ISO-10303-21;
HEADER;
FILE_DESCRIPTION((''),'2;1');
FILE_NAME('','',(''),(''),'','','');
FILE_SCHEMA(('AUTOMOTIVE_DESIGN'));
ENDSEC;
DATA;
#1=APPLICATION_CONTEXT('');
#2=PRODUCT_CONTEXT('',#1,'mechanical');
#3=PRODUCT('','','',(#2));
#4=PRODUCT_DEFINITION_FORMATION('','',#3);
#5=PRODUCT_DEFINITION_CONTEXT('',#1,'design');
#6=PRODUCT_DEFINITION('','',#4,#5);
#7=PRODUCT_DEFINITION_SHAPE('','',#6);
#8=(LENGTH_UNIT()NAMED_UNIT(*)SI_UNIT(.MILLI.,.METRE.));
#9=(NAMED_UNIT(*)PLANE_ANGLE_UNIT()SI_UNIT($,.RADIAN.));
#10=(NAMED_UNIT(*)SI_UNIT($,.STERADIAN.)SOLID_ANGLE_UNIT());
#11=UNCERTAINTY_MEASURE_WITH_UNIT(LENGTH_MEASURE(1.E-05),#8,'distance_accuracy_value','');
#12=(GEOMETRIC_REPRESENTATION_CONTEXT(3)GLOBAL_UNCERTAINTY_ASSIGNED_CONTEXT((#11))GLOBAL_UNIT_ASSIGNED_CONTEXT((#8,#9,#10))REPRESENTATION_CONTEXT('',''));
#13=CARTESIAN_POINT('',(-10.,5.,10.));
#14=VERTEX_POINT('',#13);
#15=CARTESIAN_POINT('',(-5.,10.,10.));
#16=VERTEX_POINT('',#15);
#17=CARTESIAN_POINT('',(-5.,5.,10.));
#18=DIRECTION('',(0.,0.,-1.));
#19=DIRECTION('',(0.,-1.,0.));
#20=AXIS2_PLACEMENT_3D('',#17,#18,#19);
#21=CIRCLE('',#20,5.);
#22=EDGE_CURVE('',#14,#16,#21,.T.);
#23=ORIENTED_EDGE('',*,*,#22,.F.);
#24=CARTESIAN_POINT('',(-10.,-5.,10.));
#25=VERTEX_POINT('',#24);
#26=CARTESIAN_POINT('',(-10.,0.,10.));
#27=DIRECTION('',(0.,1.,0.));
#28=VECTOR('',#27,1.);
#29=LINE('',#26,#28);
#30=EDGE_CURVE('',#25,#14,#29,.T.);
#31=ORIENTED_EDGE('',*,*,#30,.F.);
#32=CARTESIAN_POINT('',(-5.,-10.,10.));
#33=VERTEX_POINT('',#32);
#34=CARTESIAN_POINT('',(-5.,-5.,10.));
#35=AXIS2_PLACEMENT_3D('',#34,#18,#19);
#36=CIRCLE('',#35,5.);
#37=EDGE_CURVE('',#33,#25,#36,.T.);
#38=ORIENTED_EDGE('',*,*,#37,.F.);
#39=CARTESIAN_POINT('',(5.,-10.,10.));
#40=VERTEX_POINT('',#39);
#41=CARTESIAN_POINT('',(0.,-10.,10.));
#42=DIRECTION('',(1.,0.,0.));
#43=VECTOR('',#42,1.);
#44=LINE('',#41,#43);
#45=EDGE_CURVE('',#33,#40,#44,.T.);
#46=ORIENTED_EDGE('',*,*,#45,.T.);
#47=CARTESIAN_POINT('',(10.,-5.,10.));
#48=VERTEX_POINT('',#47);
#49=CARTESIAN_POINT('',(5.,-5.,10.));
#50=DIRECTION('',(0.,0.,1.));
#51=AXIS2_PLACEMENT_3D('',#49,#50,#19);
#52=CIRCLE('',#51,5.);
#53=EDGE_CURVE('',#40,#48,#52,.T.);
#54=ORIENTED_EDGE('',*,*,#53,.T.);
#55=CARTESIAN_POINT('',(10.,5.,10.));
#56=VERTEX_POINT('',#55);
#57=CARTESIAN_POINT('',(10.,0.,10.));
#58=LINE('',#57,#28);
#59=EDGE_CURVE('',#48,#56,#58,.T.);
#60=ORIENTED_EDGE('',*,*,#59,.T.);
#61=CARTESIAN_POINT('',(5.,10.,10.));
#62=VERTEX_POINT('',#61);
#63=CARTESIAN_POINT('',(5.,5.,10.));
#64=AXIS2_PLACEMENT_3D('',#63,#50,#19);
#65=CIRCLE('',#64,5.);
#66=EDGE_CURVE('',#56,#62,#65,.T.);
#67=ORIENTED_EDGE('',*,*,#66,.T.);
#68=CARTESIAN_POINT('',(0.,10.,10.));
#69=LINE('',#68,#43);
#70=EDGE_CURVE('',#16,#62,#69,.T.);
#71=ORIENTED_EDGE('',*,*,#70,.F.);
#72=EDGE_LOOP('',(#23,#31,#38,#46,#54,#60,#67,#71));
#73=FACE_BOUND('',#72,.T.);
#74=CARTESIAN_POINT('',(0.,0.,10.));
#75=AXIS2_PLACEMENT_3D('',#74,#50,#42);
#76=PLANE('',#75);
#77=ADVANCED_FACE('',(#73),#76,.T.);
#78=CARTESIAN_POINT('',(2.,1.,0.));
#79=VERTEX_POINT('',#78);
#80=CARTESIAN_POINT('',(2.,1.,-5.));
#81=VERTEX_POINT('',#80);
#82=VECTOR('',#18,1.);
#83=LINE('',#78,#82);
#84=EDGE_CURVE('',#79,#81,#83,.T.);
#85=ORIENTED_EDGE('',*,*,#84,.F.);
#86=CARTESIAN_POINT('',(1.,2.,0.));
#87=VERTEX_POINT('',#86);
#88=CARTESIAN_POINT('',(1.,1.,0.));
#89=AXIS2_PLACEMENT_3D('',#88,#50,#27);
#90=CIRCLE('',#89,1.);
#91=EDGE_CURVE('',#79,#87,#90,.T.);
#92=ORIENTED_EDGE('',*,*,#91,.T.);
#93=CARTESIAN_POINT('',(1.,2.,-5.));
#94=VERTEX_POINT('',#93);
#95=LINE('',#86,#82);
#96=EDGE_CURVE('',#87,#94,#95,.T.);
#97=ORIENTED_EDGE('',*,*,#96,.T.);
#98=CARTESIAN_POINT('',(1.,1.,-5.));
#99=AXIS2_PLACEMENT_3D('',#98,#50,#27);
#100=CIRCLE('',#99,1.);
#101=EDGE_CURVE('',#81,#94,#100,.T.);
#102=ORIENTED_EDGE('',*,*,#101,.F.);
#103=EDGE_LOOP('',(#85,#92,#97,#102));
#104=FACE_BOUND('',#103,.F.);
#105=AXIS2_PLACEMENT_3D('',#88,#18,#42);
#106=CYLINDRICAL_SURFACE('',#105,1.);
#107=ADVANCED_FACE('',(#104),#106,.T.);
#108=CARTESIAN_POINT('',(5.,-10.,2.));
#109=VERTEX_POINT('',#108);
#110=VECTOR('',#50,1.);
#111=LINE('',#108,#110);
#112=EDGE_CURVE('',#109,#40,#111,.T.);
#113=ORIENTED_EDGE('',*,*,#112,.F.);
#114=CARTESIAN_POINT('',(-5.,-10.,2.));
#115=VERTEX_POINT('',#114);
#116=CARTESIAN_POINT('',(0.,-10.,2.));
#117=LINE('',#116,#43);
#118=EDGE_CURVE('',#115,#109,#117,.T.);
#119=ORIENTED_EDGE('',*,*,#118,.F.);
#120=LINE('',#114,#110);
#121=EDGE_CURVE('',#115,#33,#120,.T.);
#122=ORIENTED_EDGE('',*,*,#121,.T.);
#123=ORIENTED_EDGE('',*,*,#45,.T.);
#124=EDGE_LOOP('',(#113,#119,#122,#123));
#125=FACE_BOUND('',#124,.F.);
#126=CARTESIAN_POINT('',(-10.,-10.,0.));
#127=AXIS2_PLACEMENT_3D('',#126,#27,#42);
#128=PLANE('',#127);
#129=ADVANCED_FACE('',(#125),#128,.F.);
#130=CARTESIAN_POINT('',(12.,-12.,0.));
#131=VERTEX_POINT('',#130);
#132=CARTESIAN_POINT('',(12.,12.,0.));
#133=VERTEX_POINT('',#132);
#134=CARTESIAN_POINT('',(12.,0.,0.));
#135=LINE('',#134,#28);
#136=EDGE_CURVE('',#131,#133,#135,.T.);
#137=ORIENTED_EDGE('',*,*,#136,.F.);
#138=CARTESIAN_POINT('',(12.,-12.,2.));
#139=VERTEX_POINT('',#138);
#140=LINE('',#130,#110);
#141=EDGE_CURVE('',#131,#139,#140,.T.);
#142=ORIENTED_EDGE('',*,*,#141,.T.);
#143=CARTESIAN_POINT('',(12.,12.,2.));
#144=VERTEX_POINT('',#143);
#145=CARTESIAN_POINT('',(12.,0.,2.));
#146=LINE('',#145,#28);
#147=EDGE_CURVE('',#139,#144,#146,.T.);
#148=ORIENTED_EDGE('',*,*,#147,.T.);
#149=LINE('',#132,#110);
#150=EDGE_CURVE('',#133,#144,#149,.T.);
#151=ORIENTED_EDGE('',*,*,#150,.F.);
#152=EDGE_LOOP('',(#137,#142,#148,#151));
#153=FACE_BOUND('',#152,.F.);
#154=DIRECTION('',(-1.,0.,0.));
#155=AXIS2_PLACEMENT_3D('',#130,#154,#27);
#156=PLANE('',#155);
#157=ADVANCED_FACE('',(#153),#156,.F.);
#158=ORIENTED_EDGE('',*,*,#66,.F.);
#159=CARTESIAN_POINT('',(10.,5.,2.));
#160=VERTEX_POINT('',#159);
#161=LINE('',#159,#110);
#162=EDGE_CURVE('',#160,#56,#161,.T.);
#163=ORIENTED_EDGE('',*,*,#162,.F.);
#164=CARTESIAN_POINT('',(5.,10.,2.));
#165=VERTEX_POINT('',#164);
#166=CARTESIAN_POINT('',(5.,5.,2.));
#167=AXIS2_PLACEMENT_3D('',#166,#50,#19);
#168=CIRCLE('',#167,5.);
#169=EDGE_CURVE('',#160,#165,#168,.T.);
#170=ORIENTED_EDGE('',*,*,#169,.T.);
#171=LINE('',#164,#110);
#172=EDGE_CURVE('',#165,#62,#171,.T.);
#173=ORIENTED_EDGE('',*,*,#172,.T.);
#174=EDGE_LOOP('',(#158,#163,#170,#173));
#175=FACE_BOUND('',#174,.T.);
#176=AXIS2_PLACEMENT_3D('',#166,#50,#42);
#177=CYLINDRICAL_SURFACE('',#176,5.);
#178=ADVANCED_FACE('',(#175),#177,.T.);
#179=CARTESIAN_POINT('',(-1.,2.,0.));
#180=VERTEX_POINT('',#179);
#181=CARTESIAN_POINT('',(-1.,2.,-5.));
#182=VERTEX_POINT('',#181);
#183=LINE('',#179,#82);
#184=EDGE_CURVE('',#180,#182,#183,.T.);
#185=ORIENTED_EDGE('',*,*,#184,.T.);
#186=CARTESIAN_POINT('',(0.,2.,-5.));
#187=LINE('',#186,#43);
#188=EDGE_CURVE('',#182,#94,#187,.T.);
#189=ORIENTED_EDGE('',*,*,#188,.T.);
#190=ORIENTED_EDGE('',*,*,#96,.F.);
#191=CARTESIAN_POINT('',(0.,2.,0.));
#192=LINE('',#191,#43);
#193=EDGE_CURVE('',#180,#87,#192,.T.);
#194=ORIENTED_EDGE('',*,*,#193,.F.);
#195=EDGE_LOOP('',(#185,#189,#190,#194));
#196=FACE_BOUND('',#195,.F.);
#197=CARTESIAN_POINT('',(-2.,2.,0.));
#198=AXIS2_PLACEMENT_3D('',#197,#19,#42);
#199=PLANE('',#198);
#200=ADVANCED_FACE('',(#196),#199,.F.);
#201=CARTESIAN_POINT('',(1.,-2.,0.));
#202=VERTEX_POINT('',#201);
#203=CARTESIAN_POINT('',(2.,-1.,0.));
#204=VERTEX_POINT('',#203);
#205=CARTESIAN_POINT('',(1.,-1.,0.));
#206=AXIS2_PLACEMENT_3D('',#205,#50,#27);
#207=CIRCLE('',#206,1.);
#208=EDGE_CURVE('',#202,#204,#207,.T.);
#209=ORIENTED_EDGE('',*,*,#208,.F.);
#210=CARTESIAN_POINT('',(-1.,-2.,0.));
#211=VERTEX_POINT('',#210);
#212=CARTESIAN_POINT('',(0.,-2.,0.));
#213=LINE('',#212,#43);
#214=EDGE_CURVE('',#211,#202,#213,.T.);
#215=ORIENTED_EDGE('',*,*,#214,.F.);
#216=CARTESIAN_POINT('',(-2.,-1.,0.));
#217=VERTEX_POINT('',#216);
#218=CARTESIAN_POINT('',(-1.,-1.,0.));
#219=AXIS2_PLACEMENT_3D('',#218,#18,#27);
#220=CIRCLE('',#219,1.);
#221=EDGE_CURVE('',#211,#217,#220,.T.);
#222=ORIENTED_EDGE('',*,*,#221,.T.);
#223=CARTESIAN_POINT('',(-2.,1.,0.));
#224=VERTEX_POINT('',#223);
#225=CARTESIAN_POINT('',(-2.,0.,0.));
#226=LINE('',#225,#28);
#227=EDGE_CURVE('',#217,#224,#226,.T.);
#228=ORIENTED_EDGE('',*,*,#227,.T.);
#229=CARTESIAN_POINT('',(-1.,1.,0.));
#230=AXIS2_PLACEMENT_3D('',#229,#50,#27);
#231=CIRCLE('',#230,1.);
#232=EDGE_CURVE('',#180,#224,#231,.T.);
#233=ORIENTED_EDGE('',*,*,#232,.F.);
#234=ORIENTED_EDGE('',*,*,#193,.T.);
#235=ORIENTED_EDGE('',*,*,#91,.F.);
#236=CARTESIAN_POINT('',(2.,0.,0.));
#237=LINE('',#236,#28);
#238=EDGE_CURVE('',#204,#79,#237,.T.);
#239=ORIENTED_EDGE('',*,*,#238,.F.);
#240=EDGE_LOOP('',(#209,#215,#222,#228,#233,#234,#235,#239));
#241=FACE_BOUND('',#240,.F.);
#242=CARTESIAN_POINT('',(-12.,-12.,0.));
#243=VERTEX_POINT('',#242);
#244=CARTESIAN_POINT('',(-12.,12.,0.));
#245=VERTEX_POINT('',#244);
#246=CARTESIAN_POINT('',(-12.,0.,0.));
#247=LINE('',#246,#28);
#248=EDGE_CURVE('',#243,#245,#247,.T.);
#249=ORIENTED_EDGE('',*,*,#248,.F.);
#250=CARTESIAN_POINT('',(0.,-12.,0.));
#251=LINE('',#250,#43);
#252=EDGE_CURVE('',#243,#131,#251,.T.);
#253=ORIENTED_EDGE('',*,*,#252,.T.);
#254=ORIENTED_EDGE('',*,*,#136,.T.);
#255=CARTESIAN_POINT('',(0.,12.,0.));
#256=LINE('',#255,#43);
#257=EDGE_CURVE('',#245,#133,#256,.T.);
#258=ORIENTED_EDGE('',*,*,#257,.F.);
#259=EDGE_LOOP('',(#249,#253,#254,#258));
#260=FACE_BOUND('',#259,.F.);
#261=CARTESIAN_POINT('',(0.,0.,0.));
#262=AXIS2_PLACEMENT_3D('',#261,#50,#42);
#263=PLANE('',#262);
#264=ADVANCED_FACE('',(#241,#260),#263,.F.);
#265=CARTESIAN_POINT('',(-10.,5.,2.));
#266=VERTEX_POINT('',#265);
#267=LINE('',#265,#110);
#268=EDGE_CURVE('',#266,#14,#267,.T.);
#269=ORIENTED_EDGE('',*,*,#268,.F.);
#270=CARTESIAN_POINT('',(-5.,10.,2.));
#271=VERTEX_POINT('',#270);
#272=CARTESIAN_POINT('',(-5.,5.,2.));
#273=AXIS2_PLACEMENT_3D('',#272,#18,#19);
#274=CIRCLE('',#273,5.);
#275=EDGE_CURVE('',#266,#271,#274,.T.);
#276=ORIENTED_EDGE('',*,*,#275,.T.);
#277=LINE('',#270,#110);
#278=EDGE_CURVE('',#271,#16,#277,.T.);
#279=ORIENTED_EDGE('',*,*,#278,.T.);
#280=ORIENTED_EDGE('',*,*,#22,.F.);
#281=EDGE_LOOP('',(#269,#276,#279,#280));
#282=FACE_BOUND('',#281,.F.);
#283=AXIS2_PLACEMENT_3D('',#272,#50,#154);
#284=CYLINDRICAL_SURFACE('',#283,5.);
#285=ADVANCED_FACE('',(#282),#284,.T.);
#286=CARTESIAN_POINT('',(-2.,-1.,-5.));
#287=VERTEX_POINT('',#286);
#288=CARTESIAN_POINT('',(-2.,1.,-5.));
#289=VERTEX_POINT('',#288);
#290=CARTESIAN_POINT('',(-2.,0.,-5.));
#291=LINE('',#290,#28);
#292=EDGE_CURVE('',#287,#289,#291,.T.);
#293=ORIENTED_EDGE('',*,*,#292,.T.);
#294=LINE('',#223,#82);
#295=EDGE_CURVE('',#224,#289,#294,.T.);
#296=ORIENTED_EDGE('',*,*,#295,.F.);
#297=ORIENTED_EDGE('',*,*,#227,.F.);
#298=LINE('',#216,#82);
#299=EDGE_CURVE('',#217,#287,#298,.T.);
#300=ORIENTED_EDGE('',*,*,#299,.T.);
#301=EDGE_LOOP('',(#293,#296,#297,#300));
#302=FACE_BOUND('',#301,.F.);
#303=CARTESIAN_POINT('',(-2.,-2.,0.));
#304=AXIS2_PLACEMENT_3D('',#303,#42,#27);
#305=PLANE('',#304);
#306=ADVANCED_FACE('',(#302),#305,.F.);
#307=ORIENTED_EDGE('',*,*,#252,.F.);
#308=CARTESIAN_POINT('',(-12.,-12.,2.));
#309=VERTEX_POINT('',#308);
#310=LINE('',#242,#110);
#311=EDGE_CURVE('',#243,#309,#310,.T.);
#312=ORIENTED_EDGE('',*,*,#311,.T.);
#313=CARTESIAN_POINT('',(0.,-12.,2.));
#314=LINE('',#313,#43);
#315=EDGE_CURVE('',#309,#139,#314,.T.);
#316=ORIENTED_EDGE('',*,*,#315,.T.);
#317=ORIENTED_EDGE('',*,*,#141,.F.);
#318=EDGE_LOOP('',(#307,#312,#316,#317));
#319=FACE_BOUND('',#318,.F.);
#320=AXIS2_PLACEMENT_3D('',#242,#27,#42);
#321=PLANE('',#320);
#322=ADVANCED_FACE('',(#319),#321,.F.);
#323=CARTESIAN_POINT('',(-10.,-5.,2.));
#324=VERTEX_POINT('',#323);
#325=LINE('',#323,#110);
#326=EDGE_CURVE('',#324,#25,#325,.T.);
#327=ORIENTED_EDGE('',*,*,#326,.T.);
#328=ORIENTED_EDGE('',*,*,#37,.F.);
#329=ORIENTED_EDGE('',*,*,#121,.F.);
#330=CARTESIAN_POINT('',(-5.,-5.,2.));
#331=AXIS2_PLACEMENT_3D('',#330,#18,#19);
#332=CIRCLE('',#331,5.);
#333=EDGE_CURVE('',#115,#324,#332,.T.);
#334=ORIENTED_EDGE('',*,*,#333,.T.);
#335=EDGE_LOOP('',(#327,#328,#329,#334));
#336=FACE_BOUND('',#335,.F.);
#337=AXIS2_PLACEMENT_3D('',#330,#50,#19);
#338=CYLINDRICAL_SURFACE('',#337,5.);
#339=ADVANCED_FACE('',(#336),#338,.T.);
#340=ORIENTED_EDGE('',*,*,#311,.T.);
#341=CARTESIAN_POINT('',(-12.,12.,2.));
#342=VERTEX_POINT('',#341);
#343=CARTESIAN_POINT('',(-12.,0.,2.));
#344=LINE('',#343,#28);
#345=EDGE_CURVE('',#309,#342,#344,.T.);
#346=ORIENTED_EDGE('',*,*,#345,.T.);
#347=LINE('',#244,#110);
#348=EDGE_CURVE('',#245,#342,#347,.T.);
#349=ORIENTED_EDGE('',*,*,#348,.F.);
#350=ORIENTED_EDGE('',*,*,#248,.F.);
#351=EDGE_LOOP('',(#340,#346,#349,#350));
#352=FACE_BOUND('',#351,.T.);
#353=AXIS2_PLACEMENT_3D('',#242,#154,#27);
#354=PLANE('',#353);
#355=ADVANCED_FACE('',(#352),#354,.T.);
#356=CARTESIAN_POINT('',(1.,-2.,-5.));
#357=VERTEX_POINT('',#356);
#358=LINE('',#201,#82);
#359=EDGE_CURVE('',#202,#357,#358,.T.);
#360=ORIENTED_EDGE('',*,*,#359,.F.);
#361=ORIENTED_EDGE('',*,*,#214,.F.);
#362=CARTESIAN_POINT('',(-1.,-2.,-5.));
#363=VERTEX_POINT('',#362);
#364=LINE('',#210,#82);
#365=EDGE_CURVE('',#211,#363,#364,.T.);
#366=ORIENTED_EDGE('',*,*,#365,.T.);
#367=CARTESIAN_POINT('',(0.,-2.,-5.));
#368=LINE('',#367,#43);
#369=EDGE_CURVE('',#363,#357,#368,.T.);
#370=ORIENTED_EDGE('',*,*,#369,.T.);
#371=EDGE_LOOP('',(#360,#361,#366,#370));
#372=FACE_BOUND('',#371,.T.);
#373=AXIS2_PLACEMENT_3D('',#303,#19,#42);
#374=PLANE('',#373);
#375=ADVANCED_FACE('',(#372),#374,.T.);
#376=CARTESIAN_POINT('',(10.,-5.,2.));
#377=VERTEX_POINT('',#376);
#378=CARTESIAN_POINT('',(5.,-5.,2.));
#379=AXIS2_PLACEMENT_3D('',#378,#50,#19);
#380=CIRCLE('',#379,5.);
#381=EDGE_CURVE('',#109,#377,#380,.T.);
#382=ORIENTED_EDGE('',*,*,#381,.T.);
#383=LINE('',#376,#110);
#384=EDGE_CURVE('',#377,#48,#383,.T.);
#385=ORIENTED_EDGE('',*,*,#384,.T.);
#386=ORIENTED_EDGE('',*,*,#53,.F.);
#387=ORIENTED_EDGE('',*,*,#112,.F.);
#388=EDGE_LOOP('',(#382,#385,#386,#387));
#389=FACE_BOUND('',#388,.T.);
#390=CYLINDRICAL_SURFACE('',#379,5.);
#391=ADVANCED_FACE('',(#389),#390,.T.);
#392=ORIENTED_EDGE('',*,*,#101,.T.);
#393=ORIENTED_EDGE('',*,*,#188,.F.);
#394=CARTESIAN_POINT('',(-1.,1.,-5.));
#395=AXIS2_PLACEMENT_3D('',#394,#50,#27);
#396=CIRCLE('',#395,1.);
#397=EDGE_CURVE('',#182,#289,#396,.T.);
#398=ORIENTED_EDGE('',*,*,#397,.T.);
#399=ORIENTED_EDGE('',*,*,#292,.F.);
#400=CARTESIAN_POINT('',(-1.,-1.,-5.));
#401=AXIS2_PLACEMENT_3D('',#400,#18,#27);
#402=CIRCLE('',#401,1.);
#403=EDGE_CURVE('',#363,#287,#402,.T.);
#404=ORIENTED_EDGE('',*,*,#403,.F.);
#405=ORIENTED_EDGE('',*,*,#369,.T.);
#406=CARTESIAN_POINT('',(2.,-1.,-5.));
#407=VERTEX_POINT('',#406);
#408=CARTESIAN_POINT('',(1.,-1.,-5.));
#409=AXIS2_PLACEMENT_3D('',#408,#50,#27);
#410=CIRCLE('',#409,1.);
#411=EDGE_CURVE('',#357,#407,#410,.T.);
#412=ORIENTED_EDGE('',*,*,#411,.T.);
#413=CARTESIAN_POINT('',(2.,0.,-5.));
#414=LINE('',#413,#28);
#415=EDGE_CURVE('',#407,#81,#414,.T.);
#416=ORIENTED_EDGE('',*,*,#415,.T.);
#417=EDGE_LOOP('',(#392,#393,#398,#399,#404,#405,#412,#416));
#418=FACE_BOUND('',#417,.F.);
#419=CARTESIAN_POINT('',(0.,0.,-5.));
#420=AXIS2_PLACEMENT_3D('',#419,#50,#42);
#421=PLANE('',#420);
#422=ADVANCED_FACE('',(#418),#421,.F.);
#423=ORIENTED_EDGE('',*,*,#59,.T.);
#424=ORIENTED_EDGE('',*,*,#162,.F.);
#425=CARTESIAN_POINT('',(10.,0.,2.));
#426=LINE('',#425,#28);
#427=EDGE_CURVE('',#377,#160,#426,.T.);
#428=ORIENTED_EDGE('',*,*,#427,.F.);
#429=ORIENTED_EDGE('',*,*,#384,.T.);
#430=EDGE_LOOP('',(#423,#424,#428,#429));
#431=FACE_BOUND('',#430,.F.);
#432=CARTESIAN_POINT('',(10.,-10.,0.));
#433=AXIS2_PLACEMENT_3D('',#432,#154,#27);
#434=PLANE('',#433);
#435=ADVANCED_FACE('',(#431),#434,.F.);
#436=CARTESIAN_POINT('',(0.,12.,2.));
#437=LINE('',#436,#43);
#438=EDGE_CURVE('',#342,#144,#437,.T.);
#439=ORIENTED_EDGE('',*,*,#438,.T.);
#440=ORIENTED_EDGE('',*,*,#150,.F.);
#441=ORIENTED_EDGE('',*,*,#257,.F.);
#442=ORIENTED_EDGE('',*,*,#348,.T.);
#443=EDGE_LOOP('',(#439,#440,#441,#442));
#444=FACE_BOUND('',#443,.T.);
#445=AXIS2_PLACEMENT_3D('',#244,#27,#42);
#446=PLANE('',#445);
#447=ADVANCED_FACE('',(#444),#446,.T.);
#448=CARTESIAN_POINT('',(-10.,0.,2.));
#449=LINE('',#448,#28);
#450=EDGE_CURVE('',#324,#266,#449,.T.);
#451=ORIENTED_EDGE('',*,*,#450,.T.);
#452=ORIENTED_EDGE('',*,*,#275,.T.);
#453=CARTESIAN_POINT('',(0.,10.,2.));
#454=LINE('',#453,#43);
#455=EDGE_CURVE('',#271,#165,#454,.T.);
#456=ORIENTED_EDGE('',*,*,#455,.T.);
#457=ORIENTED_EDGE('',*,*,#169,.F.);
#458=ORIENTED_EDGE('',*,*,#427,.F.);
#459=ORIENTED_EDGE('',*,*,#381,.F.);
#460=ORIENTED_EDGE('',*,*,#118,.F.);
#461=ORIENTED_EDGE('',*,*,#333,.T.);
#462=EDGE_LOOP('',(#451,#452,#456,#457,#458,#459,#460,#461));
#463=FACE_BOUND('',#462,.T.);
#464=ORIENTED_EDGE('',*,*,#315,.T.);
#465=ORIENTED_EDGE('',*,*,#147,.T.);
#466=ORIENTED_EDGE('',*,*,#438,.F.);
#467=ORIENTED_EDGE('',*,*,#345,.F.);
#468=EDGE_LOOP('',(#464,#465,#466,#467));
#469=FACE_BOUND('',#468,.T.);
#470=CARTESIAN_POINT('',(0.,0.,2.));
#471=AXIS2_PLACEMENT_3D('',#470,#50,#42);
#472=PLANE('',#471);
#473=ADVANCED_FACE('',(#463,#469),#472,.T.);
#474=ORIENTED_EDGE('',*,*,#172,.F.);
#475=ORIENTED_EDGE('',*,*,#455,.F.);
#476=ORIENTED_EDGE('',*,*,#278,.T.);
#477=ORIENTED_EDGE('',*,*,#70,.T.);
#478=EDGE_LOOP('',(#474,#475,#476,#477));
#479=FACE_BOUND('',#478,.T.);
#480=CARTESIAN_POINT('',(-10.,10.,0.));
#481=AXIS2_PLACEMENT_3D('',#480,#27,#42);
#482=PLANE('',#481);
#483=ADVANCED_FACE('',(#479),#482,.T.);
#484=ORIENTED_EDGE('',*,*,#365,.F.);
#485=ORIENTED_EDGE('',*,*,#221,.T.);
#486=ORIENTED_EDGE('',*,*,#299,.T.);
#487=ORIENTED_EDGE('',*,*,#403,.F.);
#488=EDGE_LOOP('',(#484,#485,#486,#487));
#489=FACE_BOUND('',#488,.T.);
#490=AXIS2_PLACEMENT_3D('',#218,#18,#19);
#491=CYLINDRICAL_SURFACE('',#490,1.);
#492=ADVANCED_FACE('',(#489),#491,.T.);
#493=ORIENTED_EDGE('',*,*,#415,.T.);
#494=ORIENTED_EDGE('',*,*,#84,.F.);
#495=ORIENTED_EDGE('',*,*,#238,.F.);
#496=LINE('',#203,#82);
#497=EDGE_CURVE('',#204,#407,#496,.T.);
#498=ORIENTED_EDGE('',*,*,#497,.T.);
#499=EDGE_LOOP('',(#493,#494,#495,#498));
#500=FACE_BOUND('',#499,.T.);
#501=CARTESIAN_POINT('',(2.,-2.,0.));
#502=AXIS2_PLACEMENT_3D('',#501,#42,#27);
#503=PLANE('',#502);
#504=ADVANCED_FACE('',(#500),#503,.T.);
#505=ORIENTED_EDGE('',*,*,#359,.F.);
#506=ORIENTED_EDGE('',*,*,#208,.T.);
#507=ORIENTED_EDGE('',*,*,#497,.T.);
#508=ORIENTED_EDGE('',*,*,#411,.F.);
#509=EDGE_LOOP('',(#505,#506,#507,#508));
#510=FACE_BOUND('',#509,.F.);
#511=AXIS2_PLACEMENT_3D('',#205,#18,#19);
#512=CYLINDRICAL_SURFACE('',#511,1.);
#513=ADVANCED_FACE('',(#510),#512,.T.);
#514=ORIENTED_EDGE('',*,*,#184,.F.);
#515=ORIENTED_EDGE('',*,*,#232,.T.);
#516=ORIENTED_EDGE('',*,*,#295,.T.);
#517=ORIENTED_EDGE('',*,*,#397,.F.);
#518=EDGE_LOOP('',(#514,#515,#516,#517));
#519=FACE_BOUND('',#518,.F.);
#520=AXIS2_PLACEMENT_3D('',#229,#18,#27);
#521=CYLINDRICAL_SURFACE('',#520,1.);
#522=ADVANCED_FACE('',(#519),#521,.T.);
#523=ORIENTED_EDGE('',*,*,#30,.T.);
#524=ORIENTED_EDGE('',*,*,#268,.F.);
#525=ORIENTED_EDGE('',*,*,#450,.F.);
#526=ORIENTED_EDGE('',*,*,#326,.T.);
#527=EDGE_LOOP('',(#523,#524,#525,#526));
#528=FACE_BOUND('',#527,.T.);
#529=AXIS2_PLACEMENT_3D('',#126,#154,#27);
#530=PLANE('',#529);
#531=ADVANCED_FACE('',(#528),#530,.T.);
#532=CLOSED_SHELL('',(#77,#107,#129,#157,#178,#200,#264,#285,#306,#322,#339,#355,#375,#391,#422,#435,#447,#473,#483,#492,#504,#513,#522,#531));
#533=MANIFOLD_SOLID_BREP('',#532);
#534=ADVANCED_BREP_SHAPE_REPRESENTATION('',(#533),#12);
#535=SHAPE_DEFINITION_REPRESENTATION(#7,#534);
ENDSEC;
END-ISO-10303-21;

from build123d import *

# Parameters (mm, degrees)
F0_W     = 20
F0_H     = 20
F0_W_2   = 4
F0_H_2   = 4
F0_R     = 1.6
F1_DEPTH = 10
F0_W_3   = 24
F0_H_3   = 24
F2_DEPTH = 2
F3_DEPTH = 5
F5_R     = 5
F6_R     = 5
F7_R     = 1


# Not quite as in the source:
# - the program builds the solid bodies; features that only make, move or delete a surface that nothing else refers to are left out


with BuildPart() as f1:
    # F0 (on Top) → F1 (new body)
    with BuildSketch(Plane.XY):
        Rectangle(F0_W, F0_H)
        Rectangle(F0_W_2, F0_H_2, mode=Mode.SUBTRACT)
        Rectangle(F0_W_2, F0_H_2)
        Circle(F0_R, mode=Mode.SUBTRACT)
        Circle(F0_R)
    extrude(amount=F1_DEPTH)

    # F0 (on Top) → F2 (join)
    with BuildSketch(Plane.XY):
        Rectangle(F0_W_3, F0_H_3)
        Rectangle(F0_W, F0_H, mode=Mode.SUBTRACT)
    extrude(amount=F2_DEPTH)

    # F0 (on Top) → F3 (join)
    with BuildSketch(Plane.XY):
        Rectangle(F0_W_2, F0_H_2)
        Circle(F0_R, mode=Mode.SUBTRACT)
        Circle(F0_R)
    extrude(amount=-F3_DEPTH)

    # F5
    f5_edges = [f1.edges().sort_by_distance(p)[0] for p in [
        (-10, -10, 6),
    ]]
    fillet(f5_edges, radius=F5_R)

    # F6
    f6_edges = [f1.edges().sort_by_distance(p)[0] for p in [
        (10, -10, 6),
        (10, 10, 6),
        (-10, 10, 6),
    ]]
    fillet(f6_edges, radius=F6_R)

    # F7
    f7_edges = [f1.edges().sort_by_distance(p)[0] for p in [
        (2, 2, -2.5),
        (2, -2, -2.5),
        (-2, -2, -2.5),
        (-2, 2, -2.5),
    ]]
    fillet(f7_edges, radius=F7_R)


solid = f1.part
